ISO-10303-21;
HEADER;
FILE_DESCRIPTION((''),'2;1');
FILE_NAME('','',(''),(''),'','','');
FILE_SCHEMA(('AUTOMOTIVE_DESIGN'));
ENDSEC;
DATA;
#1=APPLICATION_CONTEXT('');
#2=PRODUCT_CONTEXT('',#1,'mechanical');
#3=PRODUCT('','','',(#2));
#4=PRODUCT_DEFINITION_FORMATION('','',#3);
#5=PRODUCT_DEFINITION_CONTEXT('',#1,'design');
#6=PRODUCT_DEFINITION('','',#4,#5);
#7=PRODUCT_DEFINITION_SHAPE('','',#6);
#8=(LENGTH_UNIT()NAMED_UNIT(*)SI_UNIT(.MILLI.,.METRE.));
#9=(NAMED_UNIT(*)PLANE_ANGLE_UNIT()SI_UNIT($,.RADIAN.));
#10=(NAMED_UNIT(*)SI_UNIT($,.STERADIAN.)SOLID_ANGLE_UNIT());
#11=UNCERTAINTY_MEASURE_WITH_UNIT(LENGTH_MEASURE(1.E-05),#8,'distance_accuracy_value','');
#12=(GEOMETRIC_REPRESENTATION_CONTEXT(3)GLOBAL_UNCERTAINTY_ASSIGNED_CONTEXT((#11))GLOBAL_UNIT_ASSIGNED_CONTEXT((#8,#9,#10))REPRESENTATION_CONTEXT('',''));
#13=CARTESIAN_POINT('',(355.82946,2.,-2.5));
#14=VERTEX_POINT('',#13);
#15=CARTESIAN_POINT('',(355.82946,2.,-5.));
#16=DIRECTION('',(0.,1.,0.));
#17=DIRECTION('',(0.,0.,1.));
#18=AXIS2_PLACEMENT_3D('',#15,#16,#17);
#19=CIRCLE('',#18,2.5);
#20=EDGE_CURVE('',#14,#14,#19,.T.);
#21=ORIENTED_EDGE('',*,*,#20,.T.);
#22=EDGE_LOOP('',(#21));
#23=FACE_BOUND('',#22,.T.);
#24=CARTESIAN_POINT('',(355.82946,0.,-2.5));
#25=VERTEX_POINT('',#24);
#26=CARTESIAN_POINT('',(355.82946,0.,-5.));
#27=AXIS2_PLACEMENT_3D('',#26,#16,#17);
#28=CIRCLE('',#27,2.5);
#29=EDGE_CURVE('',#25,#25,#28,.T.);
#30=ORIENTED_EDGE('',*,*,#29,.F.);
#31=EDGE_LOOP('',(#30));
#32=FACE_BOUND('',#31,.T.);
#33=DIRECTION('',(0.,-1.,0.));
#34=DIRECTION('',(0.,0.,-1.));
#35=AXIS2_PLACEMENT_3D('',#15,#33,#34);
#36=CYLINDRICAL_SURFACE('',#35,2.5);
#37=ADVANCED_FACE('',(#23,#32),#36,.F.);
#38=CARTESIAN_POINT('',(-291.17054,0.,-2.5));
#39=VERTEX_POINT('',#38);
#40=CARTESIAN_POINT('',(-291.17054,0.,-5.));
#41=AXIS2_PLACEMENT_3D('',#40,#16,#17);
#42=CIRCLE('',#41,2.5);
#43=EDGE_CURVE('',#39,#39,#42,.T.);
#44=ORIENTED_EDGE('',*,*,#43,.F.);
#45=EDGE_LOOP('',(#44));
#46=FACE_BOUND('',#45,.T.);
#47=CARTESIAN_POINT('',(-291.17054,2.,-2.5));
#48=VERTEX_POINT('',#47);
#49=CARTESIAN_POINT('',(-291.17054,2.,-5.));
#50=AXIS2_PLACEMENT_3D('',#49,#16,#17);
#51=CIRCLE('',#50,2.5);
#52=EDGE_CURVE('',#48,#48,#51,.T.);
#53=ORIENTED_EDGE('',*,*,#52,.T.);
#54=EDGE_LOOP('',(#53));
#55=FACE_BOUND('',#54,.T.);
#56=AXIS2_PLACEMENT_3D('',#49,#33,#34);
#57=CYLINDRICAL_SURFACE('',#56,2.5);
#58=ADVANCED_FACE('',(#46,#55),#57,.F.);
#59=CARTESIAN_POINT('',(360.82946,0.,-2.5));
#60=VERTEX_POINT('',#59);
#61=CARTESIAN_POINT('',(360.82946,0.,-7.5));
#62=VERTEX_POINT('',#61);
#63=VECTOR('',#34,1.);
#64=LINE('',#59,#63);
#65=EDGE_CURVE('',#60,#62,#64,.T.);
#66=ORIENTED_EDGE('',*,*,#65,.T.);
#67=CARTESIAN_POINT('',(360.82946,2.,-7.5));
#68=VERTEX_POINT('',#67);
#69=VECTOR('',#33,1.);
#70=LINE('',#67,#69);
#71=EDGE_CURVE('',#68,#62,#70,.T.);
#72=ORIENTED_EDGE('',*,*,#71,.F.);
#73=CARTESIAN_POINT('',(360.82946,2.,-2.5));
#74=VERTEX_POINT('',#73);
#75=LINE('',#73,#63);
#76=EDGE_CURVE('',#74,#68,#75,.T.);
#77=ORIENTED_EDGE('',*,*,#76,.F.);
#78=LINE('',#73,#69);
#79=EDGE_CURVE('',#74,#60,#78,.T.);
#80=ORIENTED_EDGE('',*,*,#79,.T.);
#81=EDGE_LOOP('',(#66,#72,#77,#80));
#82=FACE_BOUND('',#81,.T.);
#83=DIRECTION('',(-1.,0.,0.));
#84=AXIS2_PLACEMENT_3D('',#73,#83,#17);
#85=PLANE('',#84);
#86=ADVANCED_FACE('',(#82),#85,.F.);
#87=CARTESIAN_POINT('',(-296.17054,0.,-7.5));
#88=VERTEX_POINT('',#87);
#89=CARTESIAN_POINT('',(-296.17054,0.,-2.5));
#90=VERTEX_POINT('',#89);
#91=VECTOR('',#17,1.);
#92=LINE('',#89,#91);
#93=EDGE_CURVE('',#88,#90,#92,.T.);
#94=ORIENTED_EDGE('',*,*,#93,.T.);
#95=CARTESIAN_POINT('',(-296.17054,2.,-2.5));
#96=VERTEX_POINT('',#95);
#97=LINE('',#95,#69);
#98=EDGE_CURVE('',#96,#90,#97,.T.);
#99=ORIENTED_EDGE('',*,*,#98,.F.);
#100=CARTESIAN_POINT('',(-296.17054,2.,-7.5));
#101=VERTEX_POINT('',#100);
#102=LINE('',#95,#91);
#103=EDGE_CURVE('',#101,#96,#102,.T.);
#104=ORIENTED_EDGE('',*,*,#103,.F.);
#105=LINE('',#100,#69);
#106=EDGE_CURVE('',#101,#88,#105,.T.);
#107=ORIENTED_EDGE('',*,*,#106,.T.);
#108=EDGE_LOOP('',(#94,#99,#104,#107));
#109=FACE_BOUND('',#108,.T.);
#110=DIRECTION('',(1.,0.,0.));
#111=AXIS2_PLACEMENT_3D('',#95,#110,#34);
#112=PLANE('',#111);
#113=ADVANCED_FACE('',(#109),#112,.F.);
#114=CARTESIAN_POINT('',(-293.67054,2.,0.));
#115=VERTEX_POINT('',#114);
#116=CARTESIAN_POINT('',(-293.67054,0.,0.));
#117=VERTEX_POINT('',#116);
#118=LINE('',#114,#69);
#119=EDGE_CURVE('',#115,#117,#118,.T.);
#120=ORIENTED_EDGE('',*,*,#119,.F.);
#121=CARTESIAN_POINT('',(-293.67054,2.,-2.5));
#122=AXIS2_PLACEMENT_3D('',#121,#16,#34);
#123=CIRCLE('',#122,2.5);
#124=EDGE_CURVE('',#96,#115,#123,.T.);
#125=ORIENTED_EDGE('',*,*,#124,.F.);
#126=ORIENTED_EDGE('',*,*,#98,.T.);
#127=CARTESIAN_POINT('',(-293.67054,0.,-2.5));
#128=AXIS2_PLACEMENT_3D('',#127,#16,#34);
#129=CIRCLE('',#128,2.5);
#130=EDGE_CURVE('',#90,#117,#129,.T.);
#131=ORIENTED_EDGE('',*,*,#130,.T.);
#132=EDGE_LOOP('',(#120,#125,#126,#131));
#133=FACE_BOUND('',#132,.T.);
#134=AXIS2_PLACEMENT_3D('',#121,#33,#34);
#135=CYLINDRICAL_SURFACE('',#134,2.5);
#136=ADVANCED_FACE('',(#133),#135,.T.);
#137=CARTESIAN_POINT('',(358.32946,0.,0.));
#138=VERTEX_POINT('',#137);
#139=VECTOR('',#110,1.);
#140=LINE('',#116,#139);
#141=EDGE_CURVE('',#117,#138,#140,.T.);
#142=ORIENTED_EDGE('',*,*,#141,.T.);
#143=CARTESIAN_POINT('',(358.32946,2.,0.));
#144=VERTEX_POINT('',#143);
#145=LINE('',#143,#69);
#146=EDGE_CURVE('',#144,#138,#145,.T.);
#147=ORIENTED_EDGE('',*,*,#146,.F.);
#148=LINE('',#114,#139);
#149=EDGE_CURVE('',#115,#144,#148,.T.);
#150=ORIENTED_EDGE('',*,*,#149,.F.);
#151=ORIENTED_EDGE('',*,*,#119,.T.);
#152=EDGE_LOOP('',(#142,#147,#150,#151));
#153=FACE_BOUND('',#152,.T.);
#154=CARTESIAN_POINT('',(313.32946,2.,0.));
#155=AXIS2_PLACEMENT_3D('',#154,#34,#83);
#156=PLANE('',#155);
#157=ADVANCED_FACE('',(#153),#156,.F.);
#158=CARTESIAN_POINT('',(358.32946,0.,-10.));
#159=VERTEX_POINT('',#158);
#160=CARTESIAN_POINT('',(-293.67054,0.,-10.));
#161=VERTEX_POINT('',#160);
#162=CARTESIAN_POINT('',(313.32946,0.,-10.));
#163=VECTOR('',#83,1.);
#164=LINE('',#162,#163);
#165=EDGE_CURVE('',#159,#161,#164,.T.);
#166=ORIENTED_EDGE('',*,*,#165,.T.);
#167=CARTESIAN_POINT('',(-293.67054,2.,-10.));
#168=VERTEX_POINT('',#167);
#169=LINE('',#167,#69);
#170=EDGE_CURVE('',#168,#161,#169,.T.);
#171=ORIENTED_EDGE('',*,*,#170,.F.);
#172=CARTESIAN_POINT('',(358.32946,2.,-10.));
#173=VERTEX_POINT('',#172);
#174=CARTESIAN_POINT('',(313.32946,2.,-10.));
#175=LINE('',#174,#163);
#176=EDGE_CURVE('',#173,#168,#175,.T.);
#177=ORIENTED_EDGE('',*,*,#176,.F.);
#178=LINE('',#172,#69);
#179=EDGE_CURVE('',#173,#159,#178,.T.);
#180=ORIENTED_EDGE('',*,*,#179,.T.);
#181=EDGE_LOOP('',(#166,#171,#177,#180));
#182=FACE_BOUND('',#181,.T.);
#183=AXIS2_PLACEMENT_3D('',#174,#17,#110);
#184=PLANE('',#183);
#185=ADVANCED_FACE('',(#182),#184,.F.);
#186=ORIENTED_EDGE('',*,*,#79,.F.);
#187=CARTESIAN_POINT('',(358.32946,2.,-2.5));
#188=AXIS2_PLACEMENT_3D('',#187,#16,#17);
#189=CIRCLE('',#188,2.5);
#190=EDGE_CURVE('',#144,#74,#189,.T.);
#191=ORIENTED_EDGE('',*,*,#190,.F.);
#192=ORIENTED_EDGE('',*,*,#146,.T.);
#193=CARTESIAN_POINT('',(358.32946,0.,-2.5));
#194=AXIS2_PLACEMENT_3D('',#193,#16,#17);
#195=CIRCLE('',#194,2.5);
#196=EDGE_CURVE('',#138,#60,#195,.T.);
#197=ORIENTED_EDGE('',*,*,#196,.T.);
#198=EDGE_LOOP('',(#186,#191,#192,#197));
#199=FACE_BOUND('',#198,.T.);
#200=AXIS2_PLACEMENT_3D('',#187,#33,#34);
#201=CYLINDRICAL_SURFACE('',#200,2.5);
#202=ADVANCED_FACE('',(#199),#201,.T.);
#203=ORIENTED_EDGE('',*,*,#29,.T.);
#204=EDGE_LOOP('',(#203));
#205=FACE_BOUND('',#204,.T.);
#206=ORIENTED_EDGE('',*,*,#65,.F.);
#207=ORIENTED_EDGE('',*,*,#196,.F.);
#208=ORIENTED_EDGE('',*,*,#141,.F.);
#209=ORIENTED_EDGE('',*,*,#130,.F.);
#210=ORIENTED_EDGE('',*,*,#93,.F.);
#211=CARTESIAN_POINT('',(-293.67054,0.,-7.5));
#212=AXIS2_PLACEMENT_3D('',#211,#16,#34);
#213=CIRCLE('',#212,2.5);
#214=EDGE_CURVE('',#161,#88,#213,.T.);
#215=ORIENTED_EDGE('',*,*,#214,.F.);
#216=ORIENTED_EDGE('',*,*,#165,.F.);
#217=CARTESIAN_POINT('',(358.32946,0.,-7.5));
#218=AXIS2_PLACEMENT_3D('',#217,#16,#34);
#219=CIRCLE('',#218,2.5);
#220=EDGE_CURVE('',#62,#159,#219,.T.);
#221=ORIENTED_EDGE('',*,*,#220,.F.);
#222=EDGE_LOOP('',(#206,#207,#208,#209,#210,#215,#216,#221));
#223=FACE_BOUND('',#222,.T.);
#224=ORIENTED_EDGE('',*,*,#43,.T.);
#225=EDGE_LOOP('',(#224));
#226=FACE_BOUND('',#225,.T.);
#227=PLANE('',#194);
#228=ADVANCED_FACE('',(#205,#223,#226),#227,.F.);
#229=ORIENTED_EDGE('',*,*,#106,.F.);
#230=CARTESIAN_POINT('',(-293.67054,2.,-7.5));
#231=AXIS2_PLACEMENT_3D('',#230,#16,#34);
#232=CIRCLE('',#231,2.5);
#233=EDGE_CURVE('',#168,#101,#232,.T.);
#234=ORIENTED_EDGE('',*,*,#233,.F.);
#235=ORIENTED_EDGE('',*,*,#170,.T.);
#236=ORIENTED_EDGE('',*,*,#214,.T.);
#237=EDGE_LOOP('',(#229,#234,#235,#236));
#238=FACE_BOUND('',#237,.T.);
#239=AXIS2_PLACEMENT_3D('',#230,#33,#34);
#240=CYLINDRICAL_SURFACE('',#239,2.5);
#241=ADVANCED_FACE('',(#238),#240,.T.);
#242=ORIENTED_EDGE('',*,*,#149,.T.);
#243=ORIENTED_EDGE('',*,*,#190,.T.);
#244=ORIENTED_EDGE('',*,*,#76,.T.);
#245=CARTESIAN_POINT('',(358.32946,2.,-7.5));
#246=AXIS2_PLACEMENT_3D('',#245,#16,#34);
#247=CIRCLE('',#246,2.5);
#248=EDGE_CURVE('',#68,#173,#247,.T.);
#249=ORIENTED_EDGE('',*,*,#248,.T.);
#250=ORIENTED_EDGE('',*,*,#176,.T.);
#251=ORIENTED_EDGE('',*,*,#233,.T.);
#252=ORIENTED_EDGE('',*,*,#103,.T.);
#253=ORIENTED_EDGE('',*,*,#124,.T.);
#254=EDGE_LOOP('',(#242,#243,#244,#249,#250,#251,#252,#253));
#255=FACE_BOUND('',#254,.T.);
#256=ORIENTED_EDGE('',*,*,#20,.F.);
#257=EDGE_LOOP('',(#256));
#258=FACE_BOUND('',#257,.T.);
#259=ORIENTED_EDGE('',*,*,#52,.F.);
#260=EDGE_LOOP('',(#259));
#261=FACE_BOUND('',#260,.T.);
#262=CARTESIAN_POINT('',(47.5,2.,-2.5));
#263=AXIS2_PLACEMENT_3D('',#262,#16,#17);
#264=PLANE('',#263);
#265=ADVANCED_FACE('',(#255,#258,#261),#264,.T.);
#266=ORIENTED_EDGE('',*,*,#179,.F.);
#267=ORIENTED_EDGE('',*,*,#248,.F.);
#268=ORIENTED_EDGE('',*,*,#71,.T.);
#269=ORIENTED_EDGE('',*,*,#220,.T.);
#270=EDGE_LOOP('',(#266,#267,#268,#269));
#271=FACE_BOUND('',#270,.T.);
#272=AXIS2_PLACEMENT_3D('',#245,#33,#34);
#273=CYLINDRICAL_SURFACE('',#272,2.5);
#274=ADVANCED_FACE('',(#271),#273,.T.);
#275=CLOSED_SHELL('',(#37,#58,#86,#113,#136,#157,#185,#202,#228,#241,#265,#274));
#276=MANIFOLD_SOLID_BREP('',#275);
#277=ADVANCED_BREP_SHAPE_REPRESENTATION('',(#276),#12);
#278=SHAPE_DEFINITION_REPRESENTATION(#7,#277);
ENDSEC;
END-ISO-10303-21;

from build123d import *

# Parameters (mm, degrees)
SKETCH1_R           = 2.5
BOSS_EXTRUDE2_DEPTH = 2
FLEX1_OUTLINE_R     = 2.5
FLEX1_DEPTH         = 2


# Read off the part's stored shape, not the designer's step: Flex1
with BuildPart() as part:
    # Sketch1 → Boss-Extrude2 (new body)
    with BuildSketch(Plane(origin=(0, 0, 0), x_dir=(1, 0, 0), z_dir=(0, 1, 0))):
        with BuildLine():
            Line((2.5, 0), (47.5, 0))
            ThreePointArc((47.5, 0), (49.267766953, 0.732233047), (50, 2.5))
            Line((50, 2.5), (50, 7.5))
            ThreePointArc((50, 7.5), (49.267766953, 9.267766953), (47.5, 10))
            Line((47.5, 10), (2.5, 10))
            ThreePointArc((2.5, 10), (0.732233047, 9.267766953), (0, 7.5))
            Line((0, 7.5), (0, 2.5))
            ThreePointArc((0, 2.5), (0.732233047, 0.732233047), (2.5, 0))
        make_face()
        with Locations(Location((5, 5, 0), (0, 0, 270))):
            Circle(SKETCH1_R, mode=Mode.SUBTRACT)
        with Locations(Location((45, 5, 0), (0, 0, 270))):
            Circle(SKETCH1_R, mode=Mode.SUBTRACT)
    extrude(amount=BOSS_EXTRUDE2_DEPTH)

    # Flex1 outline → Flex1 (add)
    # profile 1 of 4: a face of its own
    with BuildSketch(Plane(origin=(0, 0, 0), x_dir=(1, 0, 0), z_dir=(0, 1, 0))):
        with BuildLine():
            Line((2.5, 10), (-293.670539746, 10))
            ThreePointArc((-293.670539746, 10), (-295.438306699, 9.267766953), (-296.170539746, 7.5))
            Line((-296.170539746, 7.5), (-296.170539746, 2.5))
            ThreePointArc((-296.170539746, 2.5), (-295.438306699, 0.732233047), (-293.670539746, 0))
            Line((-293.670539746, 0), (2.5, 0))
            ThreePointArc((2.5, 0), (0.732233047, 0.732233047), (0, 2.5))
            Line((0, 2.5), (0, 7.5))
            ThreePointArc((0, 7.5), (0.732233047, 9.267766953), (2.5, 10))
        make_face()
        with Locations((-291.170539746, 5)):
            Circle(FLEX1_OUTLINE_R, mode=Mode.SUBTRACT)
    # profile 2 of 4: a face of its own
    with BuildSketch(Plane(origin=(0, 0, 0), x_dir=(1, 0, 0), z_dir=(0, 1, 0))):
        with BuildLine():
            Line((358.329460254, 10), (47.5, 10))
            ThreePointArc((47.5, 10), (49.267766953, 9.267766953), (50, 7.5))
            Line((50, 7.5), (50, 2.5))
            ThreePointArc((50, 2.5), (49.267766953, 0.732233047), (47.5, 0))
            Line((47.5, 0), (358.329460254, 0))
            ThreePointArc((358.329460254, 0), (360.097227207, 0.732233047), (360.829460254, 2.5))
            Line((360.829460254, 2.5), (360.829460254, 7.5))
            ThreePointArc((360.829460254, 7.5), (360.097227207, 9.267766953), (358.329460254, 10))
        make_face()
        with Locations((355.829460254, 5)):
            Circle(FLEX1_OUTLINE_R, mode=Mode.SUBTRACT)
    # profile 3 of 4: a face of its own
    with BuildSketch(Plane(origin=(0, 0, 0), x_dir=(1, 0, 0), z_dir=(0, 1, 0))):
        with Locations((5, 5)):
            Circle(FLEX1_OUTLINE_R)
    # profile 4 of 4: a face of its own
    with BuildSketch(Plane(origin=(0, 0, 0), x_dir=(1, 0, 0), z_dir=(0, 1, 0))):
        with Locations((45, 5)):
            Circle(FLEX1_OUTLINE_R)
    extrude(amount=FLEX1_DEPTH)


solid = part.part
